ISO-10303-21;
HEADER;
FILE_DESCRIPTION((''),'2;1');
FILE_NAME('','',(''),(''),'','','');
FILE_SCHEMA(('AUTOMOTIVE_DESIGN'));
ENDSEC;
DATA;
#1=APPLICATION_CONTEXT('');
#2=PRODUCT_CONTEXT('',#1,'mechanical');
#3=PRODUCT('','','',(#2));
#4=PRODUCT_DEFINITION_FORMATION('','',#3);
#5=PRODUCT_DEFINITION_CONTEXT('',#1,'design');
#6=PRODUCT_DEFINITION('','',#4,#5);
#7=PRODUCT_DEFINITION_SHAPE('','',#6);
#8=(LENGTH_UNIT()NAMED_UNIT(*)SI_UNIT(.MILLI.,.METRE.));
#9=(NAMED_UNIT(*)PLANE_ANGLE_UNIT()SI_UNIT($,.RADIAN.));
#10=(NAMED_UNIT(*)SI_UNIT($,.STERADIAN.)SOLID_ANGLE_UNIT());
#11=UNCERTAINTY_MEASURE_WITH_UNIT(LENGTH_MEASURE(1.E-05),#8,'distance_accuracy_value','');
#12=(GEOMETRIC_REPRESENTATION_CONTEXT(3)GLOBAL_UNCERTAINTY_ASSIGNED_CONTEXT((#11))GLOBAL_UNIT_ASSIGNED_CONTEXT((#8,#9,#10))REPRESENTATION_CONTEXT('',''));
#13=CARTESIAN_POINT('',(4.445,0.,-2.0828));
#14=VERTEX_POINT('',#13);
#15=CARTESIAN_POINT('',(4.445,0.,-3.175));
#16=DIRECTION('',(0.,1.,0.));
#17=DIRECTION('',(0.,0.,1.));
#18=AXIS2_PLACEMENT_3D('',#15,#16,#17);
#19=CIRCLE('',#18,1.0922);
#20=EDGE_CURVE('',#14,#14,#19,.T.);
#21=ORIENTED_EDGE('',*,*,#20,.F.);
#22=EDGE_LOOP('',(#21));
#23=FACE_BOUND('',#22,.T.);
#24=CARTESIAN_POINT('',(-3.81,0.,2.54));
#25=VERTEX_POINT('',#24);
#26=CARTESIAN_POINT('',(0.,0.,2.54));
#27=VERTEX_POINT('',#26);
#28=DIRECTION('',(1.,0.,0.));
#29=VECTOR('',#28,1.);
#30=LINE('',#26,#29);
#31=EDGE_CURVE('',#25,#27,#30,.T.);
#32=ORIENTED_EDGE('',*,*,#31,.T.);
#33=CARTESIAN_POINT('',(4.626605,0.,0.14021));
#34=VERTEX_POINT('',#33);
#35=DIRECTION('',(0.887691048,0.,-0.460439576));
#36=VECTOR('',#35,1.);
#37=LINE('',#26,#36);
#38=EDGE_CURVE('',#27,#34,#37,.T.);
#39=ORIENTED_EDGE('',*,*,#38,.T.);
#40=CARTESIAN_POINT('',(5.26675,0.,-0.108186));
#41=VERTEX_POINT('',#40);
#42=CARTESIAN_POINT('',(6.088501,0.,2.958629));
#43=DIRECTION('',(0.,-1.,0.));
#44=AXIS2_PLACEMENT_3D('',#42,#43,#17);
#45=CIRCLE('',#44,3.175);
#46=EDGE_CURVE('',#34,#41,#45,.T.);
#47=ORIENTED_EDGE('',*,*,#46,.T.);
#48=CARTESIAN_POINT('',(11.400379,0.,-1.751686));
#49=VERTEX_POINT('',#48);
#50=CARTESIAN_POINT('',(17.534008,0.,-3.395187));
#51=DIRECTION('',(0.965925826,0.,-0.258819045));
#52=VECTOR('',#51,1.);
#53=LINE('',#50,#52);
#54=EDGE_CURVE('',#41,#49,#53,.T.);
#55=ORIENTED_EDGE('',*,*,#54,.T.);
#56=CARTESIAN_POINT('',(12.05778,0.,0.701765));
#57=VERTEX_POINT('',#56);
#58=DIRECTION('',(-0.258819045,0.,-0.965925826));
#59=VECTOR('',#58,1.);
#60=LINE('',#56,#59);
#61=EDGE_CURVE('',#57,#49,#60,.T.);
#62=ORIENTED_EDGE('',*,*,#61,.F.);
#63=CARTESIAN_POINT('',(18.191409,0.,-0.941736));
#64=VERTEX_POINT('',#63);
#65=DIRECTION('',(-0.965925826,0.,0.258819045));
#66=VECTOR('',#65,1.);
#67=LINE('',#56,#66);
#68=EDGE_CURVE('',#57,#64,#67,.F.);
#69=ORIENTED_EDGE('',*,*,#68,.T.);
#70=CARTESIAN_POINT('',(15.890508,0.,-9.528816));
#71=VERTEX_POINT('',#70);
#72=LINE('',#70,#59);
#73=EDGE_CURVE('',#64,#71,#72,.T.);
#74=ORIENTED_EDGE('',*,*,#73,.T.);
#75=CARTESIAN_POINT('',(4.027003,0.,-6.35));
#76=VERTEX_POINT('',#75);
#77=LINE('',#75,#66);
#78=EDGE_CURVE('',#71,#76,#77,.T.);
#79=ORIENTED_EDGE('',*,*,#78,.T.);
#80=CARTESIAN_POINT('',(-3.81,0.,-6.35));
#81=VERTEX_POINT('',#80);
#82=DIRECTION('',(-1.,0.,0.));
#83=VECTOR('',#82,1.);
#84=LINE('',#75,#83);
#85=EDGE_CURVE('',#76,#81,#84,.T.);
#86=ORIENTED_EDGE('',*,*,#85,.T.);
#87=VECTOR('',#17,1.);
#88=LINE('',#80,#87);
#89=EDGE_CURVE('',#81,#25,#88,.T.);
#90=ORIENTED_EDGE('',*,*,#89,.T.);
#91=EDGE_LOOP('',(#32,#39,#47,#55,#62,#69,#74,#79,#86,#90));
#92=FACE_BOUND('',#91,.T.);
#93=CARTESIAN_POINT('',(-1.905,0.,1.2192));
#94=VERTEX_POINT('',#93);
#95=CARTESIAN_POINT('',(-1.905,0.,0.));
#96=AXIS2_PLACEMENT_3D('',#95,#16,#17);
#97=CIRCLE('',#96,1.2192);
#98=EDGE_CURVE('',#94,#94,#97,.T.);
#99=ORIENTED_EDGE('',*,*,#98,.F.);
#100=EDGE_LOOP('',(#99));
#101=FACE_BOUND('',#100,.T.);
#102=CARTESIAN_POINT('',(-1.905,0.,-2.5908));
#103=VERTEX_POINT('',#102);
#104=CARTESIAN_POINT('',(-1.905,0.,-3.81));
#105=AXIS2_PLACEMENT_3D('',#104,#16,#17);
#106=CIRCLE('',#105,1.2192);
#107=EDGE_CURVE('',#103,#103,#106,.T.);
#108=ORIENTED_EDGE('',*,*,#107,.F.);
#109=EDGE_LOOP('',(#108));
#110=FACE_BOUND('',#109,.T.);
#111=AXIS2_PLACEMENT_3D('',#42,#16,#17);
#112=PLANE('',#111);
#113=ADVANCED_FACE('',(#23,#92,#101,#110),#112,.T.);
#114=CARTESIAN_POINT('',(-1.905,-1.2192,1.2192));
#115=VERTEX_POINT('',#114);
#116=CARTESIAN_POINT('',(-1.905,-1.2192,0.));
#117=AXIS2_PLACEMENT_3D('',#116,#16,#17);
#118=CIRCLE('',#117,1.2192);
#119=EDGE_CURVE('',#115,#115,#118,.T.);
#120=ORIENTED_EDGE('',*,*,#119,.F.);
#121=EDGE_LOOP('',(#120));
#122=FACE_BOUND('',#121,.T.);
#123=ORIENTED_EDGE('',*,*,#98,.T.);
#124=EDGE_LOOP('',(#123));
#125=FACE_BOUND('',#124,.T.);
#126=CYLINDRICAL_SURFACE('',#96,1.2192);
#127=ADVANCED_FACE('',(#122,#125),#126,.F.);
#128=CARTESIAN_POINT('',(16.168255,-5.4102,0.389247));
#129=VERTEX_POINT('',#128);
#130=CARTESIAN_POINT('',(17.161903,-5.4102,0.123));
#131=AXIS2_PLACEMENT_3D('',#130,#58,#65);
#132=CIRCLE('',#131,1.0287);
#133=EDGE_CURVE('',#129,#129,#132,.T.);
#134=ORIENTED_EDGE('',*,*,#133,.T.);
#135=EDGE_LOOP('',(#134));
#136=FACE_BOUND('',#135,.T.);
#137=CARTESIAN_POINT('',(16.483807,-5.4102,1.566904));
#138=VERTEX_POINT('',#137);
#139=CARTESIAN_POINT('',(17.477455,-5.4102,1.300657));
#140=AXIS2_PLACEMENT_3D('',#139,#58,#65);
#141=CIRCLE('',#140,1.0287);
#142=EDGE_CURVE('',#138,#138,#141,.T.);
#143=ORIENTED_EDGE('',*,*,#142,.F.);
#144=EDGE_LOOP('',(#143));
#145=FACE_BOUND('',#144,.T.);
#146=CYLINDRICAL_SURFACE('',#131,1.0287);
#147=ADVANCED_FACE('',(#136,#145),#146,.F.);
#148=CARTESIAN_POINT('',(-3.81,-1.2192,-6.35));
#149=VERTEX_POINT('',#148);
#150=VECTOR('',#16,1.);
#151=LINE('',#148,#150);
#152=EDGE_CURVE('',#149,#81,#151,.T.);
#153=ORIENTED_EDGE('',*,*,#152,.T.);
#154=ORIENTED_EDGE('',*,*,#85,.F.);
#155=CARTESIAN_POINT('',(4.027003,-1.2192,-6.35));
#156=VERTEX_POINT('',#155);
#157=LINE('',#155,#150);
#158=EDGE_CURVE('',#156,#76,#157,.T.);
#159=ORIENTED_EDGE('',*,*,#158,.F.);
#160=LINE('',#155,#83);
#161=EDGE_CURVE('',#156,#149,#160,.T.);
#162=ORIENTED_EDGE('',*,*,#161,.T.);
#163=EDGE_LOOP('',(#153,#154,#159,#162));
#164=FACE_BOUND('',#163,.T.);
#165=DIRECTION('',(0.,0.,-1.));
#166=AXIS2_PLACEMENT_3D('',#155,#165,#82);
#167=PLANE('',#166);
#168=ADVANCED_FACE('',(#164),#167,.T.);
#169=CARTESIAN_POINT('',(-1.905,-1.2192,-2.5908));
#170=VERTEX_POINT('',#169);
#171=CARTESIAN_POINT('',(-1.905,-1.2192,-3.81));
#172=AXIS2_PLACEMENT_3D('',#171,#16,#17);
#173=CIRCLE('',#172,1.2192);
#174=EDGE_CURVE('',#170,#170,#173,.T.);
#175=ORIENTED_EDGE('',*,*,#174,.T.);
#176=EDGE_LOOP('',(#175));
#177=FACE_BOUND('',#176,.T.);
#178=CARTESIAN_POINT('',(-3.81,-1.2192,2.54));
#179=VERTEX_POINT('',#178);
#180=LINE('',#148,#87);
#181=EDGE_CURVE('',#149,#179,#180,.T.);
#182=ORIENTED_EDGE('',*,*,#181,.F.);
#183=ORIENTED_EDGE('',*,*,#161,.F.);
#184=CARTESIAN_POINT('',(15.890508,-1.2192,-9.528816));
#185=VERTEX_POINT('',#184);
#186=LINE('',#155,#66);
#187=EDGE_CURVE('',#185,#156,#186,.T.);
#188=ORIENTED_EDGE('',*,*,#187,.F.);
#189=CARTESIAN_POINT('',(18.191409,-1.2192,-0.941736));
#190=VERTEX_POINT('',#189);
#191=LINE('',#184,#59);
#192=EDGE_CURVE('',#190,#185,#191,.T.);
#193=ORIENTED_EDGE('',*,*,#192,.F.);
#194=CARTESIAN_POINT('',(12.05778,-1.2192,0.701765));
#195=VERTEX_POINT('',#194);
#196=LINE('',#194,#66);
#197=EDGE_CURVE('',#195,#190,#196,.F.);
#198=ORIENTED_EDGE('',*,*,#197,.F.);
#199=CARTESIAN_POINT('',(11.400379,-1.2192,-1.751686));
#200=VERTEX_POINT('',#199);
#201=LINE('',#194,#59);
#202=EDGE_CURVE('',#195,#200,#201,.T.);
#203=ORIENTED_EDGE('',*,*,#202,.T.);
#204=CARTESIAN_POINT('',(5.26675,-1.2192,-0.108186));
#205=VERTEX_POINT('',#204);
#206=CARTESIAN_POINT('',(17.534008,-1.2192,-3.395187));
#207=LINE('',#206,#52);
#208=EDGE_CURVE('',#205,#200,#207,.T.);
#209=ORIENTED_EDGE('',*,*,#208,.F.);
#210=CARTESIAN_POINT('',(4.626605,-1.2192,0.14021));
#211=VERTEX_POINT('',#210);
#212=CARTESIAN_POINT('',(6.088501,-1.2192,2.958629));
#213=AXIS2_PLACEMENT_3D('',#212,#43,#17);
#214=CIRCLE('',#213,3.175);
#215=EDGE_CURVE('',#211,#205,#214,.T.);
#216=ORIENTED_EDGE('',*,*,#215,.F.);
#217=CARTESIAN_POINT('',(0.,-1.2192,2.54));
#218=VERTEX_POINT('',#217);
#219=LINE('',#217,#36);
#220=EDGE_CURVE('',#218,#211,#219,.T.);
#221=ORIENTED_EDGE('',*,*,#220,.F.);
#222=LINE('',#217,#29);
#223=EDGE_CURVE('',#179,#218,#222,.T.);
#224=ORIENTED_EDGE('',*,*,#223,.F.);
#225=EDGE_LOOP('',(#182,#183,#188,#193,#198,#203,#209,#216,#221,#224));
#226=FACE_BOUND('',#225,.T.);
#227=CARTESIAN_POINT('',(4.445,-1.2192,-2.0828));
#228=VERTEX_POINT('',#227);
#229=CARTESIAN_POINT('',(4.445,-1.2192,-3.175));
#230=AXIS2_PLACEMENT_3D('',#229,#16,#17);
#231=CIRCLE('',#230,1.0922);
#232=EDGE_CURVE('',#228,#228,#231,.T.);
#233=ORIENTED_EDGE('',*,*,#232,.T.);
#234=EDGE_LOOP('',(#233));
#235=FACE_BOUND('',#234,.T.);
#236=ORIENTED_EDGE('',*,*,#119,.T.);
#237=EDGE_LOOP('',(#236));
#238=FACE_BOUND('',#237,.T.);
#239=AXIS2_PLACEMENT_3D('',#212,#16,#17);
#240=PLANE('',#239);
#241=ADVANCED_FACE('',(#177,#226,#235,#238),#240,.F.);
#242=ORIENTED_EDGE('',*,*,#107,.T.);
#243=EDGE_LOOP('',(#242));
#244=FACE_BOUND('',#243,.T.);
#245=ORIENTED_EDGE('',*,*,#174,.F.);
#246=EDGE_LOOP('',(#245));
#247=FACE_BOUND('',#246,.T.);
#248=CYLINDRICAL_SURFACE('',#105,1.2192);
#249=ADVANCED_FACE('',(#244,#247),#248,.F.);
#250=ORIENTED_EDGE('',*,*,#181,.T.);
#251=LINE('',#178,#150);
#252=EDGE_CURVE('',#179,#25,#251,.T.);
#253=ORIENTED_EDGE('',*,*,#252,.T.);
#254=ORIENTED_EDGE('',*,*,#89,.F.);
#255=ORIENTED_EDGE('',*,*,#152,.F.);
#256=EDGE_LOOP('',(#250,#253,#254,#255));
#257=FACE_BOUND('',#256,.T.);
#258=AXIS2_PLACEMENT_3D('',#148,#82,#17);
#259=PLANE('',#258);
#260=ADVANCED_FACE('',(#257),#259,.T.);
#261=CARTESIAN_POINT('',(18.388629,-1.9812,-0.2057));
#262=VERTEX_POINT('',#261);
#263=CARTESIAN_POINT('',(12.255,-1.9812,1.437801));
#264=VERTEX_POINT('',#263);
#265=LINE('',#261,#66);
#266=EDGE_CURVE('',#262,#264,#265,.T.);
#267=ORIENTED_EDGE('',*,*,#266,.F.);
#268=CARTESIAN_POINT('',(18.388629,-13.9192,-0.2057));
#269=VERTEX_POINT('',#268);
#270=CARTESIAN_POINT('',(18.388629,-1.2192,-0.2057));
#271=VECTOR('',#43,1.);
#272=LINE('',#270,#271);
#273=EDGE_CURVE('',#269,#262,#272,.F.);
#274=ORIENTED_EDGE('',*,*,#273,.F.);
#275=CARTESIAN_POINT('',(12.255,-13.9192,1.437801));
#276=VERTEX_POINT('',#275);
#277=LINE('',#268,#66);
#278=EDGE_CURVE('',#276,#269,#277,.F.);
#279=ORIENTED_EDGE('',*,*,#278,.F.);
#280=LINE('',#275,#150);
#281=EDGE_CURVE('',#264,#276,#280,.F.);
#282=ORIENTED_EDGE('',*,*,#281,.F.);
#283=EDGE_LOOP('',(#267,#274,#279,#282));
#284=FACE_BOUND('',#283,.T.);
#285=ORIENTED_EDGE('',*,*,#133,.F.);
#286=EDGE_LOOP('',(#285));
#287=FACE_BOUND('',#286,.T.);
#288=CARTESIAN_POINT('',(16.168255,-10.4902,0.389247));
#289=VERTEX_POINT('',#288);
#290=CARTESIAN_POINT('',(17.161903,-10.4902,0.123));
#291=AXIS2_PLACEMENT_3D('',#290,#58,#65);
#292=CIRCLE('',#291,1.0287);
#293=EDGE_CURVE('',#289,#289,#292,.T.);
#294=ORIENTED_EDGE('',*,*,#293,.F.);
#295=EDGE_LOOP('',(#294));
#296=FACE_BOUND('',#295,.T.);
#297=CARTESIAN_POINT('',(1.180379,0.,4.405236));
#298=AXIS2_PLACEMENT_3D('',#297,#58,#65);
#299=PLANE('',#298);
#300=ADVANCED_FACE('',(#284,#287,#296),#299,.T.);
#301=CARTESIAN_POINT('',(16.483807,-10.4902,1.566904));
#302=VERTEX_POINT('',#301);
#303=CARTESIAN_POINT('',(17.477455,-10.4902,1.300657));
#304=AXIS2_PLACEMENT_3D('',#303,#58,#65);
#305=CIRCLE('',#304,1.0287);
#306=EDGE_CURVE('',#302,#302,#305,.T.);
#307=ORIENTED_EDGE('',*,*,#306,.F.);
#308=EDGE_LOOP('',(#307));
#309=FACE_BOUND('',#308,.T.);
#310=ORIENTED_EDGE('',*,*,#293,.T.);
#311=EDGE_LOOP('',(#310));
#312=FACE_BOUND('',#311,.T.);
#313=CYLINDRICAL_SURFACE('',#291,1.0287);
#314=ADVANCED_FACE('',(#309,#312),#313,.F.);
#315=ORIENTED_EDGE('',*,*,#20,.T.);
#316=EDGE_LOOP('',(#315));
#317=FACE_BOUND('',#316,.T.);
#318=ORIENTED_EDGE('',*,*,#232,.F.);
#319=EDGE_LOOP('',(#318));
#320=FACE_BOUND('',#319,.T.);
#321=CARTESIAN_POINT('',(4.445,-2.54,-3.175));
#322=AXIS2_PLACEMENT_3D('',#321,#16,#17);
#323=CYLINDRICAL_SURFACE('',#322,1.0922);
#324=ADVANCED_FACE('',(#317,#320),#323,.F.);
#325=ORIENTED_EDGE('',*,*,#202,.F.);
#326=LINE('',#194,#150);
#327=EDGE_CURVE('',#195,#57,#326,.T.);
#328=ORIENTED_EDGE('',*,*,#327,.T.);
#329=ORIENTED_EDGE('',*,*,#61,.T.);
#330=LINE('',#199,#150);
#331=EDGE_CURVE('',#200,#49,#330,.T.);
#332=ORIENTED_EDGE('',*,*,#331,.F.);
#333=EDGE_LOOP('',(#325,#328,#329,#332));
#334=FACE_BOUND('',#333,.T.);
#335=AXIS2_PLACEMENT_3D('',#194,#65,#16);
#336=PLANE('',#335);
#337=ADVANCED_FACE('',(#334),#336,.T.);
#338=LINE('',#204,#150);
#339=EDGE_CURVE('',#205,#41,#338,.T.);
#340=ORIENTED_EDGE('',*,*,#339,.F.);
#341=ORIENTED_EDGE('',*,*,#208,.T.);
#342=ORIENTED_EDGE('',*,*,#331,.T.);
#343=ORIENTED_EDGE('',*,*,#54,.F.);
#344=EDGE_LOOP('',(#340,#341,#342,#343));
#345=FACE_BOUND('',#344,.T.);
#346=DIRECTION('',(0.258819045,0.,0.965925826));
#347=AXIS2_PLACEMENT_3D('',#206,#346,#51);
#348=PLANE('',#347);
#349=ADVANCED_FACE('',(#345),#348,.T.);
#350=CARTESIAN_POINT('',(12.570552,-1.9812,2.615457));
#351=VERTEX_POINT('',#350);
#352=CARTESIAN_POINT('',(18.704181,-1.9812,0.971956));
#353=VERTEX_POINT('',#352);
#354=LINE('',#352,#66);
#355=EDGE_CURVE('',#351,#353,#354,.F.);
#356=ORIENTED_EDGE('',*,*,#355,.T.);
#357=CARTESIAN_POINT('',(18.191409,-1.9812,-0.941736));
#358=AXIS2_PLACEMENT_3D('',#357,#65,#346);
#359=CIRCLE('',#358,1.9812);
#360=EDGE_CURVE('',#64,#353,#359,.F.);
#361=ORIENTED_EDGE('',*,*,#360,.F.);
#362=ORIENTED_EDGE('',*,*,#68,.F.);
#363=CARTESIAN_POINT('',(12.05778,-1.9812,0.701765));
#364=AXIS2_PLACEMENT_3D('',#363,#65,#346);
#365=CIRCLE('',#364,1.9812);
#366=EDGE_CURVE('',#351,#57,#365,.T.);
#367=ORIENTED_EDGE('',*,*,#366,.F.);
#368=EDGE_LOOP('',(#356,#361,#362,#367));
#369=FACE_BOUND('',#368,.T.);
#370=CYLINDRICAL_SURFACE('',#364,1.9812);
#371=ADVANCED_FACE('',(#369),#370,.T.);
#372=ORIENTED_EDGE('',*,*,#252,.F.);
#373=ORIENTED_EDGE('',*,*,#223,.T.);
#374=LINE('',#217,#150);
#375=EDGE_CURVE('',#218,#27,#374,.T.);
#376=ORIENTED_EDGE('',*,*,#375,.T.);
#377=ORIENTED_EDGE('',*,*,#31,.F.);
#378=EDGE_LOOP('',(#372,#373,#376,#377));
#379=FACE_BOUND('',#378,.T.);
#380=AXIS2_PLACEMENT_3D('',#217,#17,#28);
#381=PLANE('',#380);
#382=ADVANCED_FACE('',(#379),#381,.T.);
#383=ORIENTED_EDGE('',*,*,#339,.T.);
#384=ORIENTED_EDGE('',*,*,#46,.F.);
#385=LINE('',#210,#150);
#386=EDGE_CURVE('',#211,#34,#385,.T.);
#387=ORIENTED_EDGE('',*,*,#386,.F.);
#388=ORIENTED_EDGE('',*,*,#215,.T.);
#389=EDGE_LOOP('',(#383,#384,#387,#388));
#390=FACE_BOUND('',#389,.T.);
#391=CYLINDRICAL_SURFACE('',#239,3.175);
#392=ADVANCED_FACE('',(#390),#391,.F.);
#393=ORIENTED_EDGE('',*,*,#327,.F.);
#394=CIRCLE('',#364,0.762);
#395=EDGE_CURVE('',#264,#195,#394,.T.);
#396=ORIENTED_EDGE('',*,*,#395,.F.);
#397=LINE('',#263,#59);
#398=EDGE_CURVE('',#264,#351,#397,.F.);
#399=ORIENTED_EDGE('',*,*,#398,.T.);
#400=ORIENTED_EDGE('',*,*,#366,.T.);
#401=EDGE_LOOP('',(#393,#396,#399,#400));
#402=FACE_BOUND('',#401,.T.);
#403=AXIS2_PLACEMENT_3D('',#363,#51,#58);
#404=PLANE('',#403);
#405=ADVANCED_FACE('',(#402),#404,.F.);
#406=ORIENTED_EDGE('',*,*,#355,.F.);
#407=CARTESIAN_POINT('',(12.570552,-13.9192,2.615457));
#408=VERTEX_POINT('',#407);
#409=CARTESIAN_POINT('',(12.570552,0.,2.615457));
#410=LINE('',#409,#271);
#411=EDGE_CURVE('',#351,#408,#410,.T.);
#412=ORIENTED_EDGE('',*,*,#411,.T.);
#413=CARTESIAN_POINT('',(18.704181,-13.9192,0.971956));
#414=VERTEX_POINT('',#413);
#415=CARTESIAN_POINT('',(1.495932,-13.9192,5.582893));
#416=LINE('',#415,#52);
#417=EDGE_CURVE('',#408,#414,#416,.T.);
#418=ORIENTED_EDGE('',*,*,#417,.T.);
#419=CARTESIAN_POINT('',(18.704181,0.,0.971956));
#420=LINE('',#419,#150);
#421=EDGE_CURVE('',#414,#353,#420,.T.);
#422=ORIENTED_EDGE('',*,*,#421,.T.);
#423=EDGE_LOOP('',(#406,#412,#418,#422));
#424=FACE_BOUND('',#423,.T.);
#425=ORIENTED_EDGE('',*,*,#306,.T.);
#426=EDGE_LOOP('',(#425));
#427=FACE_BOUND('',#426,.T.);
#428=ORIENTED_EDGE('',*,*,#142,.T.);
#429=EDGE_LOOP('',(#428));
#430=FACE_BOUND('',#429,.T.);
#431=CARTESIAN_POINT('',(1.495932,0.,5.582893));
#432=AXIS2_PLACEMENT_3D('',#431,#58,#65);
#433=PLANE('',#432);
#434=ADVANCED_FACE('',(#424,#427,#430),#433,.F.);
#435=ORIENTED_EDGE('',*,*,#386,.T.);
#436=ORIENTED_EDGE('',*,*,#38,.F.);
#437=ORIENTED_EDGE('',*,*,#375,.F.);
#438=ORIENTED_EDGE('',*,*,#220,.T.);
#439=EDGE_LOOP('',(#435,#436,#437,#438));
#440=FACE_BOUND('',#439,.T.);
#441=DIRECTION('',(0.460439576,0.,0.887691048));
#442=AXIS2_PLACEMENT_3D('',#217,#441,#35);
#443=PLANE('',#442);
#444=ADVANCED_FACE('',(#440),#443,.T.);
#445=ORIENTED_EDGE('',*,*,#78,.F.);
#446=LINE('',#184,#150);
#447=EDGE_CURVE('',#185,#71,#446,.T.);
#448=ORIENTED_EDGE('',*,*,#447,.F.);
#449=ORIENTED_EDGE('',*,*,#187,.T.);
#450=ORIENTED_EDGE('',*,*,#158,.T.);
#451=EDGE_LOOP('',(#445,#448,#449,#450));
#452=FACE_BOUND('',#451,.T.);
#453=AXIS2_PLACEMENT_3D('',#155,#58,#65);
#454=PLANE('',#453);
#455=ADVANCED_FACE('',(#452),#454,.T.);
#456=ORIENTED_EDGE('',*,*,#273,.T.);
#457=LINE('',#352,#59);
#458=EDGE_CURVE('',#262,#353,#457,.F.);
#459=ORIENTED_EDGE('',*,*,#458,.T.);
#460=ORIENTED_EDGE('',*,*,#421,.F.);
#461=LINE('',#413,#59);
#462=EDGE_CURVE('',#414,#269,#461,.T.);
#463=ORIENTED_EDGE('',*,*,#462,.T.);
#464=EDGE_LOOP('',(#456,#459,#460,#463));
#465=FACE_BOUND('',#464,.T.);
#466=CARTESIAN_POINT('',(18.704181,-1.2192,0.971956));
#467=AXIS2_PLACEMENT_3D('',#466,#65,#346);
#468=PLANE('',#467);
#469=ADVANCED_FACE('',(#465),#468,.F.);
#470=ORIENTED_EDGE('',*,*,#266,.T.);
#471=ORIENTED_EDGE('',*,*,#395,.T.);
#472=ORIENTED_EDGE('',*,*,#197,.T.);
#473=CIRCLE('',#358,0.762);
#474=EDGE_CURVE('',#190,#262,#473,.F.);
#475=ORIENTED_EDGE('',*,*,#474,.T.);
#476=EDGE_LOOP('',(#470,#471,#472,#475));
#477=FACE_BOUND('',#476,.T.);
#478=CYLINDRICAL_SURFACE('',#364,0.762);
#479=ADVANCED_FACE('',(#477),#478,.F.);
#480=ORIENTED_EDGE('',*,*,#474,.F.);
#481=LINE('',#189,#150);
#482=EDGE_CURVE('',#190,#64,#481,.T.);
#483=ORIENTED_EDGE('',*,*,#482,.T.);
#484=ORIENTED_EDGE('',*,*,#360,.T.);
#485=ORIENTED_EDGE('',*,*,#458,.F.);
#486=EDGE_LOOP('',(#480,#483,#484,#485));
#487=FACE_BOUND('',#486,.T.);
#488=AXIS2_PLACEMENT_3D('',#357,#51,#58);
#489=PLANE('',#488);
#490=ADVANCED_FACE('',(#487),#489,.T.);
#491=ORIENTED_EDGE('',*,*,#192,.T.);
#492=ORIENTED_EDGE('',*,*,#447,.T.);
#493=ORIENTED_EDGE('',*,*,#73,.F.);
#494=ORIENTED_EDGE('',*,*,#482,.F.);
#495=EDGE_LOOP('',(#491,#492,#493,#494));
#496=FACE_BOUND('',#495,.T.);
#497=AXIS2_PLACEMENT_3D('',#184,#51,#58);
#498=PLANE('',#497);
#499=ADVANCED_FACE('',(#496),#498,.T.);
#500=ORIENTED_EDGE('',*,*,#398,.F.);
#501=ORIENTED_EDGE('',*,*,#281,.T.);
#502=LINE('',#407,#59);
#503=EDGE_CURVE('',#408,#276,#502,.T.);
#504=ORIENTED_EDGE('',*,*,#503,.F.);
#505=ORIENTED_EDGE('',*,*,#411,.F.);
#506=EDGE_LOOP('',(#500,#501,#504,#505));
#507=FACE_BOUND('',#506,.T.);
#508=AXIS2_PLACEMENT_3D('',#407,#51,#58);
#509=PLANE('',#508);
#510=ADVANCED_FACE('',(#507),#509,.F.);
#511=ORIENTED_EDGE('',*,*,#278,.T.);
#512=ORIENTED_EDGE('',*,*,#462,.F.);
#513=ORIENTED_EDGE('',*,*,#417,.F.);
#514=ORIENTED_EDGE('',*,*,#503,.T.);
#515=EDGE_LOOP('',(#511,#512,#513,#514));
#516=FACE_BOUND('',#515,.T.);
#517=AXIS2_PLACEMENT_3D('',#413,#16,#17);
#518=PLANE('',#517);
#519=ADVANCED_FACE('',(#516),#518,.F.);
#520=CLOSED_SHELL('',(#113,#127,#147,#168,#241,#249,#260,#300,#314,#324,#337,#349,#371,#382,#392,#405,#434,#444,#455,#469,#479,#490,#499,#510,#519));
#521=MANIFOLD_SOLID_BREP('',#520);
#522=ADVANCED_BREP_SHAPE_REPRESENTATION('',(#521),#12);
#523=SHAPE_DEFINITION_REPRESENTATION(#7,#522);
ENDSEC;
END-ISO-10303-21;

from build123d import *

# Parameters (mm, degrees)
BASE_FLANGE1_DEPTH              = 1.2192
HOLE1_START                     = -1.2192
HOLE1_OUTLINE_R                 = 1.0922
HOLE1_DEPTH                     = 1.2192
EDGE_FLANGE1_DEPTH              = 6.35
F_1_CLEARANCE_HOLE2_D           = 2.0574
F_1_CLEARANCE_HOLE2_ON_FACE_2_D = 2.0574
F_2_CLEARANCE_HOLE2_D           = 2.4384


# Read off the part's stored shape, not the designer's step: Hole1
# Sheet-metal steps are written as plain solids
with BuildPart() as part:
    # Sketch1 → Base-Flange1 (new body)
    with BuildSketch(Plane(origin=(0, 0, 0), x_dir=(1, 0, 0), z_dir=(0, 1, 0))):
        with BuildLine():
            Line((4.02700332, 6.35), (15.890507526, 9.528816371))
            Line((15.890507526, 9.528816371), (17.534008462, 3.395187374))
            Line((17.534008462, 3.395187374), (5.266750468, 0.108185502))
            ThreePointArc((5.266750468, 0.108185502), (4.939943157, 0.001343981), (4.626605284, -0.140209919))
            Line((4.626605284, -0.140209919), (0, -2.54))
            Line((0, -2.54), (-3.81, -2.54))
            Line((-3.81, -2.54), (-3.81, 6.35))
            Line((-3.81, 6.35), (4.02700332, 6.35))
        make_face()
    extrude(amount=-BASE_FLANGE1_DEPTH)

    # Hole1 outline → Hole1 (cut)
    with BuildSketch(Plane(origin=(0, 0, 0), x_dir=(1, 0, 0), z_dir=(0, 1, 0)).offset(HOLE1_START)):
        with Locations((4.445, 3.175)):
            Circle(HOLE1_OUTLINE_R)
    extrude(amount=HOLE1_DEPTH, mode=Mode.SUBTRACT)

    # Edge-Flange1 section (across the edge) → Edge-Flange1 (add)
    with BuildSketch(Plane(origin=(18.388628949, -1.2192, -0.205700296), x_dir=(-0.2588190451025216, -3.4914813388431334e-15, -0.9659258262890682), z_dir=(-0.9659258262890682, 0, 0.2588190451025216))):
        with BuildLine():
            Line((-1.2192, 0.762), (-1.2192, 12.7))
            Line((-1.2192, 12.7), (0, 12.7))
            Line((0, 12.7), (0, 0.762))
            ThreePointArc((0, 0.762), (0.223184633, 0.223184633), (0.762, 0))
            Line((0.762, 0), (3.302, 0))
            Line((3.302, 0), (3.302, -1.2192))
            Line((3.302, -1.2192), (0.762, -1.2192))
            ThreePointArc((0.762, -1.2192), (-0.638919955, -0.638919955), (-1.2192, 0.762))
        make_face()
    extrude(amount=EDGE_FLANGE1_DEPTH)

    # #1 Clearance Hole2 (through all)
    with Locations(Plane(origin=(17.16190315, -10.4902, 0.122999891), x_dir=(-0.965925826289, 0, 0.258819045103), z_dir=(-0.258819045103, 0, -0.965925826289))):
        with Locations((0, 0)):
            Hole(F_1_CLEARANCE_HOLE2_D / 2)

    # #1 Clearance Hole2 on face 2 (through all)
    with Locations(Plane(origin=(17.16190315, -5.4102, 0.122999891), x_dir=(-0.965925849201, 0, 0.258818959594), z_dir=(-0.258818959594, 0, -0.965925849201))):
        with Locations((0, 0)):
            Hole(F_1_CLEARANCE_HOLE2_ON_FACE_2_D / 2)

    # #2 Clearance Hole2 (through all)
    with Locations(Plane(origin=(0, 0, 0), x_dir=(1, 0, 0), z_dir=(0, 1, 0))):
        with Locations((-1.905, 0), (-1.905, 3.81)):
            Hole(F_2_CLEARANCE_HOLE2_D / 2)


solid = part.part
